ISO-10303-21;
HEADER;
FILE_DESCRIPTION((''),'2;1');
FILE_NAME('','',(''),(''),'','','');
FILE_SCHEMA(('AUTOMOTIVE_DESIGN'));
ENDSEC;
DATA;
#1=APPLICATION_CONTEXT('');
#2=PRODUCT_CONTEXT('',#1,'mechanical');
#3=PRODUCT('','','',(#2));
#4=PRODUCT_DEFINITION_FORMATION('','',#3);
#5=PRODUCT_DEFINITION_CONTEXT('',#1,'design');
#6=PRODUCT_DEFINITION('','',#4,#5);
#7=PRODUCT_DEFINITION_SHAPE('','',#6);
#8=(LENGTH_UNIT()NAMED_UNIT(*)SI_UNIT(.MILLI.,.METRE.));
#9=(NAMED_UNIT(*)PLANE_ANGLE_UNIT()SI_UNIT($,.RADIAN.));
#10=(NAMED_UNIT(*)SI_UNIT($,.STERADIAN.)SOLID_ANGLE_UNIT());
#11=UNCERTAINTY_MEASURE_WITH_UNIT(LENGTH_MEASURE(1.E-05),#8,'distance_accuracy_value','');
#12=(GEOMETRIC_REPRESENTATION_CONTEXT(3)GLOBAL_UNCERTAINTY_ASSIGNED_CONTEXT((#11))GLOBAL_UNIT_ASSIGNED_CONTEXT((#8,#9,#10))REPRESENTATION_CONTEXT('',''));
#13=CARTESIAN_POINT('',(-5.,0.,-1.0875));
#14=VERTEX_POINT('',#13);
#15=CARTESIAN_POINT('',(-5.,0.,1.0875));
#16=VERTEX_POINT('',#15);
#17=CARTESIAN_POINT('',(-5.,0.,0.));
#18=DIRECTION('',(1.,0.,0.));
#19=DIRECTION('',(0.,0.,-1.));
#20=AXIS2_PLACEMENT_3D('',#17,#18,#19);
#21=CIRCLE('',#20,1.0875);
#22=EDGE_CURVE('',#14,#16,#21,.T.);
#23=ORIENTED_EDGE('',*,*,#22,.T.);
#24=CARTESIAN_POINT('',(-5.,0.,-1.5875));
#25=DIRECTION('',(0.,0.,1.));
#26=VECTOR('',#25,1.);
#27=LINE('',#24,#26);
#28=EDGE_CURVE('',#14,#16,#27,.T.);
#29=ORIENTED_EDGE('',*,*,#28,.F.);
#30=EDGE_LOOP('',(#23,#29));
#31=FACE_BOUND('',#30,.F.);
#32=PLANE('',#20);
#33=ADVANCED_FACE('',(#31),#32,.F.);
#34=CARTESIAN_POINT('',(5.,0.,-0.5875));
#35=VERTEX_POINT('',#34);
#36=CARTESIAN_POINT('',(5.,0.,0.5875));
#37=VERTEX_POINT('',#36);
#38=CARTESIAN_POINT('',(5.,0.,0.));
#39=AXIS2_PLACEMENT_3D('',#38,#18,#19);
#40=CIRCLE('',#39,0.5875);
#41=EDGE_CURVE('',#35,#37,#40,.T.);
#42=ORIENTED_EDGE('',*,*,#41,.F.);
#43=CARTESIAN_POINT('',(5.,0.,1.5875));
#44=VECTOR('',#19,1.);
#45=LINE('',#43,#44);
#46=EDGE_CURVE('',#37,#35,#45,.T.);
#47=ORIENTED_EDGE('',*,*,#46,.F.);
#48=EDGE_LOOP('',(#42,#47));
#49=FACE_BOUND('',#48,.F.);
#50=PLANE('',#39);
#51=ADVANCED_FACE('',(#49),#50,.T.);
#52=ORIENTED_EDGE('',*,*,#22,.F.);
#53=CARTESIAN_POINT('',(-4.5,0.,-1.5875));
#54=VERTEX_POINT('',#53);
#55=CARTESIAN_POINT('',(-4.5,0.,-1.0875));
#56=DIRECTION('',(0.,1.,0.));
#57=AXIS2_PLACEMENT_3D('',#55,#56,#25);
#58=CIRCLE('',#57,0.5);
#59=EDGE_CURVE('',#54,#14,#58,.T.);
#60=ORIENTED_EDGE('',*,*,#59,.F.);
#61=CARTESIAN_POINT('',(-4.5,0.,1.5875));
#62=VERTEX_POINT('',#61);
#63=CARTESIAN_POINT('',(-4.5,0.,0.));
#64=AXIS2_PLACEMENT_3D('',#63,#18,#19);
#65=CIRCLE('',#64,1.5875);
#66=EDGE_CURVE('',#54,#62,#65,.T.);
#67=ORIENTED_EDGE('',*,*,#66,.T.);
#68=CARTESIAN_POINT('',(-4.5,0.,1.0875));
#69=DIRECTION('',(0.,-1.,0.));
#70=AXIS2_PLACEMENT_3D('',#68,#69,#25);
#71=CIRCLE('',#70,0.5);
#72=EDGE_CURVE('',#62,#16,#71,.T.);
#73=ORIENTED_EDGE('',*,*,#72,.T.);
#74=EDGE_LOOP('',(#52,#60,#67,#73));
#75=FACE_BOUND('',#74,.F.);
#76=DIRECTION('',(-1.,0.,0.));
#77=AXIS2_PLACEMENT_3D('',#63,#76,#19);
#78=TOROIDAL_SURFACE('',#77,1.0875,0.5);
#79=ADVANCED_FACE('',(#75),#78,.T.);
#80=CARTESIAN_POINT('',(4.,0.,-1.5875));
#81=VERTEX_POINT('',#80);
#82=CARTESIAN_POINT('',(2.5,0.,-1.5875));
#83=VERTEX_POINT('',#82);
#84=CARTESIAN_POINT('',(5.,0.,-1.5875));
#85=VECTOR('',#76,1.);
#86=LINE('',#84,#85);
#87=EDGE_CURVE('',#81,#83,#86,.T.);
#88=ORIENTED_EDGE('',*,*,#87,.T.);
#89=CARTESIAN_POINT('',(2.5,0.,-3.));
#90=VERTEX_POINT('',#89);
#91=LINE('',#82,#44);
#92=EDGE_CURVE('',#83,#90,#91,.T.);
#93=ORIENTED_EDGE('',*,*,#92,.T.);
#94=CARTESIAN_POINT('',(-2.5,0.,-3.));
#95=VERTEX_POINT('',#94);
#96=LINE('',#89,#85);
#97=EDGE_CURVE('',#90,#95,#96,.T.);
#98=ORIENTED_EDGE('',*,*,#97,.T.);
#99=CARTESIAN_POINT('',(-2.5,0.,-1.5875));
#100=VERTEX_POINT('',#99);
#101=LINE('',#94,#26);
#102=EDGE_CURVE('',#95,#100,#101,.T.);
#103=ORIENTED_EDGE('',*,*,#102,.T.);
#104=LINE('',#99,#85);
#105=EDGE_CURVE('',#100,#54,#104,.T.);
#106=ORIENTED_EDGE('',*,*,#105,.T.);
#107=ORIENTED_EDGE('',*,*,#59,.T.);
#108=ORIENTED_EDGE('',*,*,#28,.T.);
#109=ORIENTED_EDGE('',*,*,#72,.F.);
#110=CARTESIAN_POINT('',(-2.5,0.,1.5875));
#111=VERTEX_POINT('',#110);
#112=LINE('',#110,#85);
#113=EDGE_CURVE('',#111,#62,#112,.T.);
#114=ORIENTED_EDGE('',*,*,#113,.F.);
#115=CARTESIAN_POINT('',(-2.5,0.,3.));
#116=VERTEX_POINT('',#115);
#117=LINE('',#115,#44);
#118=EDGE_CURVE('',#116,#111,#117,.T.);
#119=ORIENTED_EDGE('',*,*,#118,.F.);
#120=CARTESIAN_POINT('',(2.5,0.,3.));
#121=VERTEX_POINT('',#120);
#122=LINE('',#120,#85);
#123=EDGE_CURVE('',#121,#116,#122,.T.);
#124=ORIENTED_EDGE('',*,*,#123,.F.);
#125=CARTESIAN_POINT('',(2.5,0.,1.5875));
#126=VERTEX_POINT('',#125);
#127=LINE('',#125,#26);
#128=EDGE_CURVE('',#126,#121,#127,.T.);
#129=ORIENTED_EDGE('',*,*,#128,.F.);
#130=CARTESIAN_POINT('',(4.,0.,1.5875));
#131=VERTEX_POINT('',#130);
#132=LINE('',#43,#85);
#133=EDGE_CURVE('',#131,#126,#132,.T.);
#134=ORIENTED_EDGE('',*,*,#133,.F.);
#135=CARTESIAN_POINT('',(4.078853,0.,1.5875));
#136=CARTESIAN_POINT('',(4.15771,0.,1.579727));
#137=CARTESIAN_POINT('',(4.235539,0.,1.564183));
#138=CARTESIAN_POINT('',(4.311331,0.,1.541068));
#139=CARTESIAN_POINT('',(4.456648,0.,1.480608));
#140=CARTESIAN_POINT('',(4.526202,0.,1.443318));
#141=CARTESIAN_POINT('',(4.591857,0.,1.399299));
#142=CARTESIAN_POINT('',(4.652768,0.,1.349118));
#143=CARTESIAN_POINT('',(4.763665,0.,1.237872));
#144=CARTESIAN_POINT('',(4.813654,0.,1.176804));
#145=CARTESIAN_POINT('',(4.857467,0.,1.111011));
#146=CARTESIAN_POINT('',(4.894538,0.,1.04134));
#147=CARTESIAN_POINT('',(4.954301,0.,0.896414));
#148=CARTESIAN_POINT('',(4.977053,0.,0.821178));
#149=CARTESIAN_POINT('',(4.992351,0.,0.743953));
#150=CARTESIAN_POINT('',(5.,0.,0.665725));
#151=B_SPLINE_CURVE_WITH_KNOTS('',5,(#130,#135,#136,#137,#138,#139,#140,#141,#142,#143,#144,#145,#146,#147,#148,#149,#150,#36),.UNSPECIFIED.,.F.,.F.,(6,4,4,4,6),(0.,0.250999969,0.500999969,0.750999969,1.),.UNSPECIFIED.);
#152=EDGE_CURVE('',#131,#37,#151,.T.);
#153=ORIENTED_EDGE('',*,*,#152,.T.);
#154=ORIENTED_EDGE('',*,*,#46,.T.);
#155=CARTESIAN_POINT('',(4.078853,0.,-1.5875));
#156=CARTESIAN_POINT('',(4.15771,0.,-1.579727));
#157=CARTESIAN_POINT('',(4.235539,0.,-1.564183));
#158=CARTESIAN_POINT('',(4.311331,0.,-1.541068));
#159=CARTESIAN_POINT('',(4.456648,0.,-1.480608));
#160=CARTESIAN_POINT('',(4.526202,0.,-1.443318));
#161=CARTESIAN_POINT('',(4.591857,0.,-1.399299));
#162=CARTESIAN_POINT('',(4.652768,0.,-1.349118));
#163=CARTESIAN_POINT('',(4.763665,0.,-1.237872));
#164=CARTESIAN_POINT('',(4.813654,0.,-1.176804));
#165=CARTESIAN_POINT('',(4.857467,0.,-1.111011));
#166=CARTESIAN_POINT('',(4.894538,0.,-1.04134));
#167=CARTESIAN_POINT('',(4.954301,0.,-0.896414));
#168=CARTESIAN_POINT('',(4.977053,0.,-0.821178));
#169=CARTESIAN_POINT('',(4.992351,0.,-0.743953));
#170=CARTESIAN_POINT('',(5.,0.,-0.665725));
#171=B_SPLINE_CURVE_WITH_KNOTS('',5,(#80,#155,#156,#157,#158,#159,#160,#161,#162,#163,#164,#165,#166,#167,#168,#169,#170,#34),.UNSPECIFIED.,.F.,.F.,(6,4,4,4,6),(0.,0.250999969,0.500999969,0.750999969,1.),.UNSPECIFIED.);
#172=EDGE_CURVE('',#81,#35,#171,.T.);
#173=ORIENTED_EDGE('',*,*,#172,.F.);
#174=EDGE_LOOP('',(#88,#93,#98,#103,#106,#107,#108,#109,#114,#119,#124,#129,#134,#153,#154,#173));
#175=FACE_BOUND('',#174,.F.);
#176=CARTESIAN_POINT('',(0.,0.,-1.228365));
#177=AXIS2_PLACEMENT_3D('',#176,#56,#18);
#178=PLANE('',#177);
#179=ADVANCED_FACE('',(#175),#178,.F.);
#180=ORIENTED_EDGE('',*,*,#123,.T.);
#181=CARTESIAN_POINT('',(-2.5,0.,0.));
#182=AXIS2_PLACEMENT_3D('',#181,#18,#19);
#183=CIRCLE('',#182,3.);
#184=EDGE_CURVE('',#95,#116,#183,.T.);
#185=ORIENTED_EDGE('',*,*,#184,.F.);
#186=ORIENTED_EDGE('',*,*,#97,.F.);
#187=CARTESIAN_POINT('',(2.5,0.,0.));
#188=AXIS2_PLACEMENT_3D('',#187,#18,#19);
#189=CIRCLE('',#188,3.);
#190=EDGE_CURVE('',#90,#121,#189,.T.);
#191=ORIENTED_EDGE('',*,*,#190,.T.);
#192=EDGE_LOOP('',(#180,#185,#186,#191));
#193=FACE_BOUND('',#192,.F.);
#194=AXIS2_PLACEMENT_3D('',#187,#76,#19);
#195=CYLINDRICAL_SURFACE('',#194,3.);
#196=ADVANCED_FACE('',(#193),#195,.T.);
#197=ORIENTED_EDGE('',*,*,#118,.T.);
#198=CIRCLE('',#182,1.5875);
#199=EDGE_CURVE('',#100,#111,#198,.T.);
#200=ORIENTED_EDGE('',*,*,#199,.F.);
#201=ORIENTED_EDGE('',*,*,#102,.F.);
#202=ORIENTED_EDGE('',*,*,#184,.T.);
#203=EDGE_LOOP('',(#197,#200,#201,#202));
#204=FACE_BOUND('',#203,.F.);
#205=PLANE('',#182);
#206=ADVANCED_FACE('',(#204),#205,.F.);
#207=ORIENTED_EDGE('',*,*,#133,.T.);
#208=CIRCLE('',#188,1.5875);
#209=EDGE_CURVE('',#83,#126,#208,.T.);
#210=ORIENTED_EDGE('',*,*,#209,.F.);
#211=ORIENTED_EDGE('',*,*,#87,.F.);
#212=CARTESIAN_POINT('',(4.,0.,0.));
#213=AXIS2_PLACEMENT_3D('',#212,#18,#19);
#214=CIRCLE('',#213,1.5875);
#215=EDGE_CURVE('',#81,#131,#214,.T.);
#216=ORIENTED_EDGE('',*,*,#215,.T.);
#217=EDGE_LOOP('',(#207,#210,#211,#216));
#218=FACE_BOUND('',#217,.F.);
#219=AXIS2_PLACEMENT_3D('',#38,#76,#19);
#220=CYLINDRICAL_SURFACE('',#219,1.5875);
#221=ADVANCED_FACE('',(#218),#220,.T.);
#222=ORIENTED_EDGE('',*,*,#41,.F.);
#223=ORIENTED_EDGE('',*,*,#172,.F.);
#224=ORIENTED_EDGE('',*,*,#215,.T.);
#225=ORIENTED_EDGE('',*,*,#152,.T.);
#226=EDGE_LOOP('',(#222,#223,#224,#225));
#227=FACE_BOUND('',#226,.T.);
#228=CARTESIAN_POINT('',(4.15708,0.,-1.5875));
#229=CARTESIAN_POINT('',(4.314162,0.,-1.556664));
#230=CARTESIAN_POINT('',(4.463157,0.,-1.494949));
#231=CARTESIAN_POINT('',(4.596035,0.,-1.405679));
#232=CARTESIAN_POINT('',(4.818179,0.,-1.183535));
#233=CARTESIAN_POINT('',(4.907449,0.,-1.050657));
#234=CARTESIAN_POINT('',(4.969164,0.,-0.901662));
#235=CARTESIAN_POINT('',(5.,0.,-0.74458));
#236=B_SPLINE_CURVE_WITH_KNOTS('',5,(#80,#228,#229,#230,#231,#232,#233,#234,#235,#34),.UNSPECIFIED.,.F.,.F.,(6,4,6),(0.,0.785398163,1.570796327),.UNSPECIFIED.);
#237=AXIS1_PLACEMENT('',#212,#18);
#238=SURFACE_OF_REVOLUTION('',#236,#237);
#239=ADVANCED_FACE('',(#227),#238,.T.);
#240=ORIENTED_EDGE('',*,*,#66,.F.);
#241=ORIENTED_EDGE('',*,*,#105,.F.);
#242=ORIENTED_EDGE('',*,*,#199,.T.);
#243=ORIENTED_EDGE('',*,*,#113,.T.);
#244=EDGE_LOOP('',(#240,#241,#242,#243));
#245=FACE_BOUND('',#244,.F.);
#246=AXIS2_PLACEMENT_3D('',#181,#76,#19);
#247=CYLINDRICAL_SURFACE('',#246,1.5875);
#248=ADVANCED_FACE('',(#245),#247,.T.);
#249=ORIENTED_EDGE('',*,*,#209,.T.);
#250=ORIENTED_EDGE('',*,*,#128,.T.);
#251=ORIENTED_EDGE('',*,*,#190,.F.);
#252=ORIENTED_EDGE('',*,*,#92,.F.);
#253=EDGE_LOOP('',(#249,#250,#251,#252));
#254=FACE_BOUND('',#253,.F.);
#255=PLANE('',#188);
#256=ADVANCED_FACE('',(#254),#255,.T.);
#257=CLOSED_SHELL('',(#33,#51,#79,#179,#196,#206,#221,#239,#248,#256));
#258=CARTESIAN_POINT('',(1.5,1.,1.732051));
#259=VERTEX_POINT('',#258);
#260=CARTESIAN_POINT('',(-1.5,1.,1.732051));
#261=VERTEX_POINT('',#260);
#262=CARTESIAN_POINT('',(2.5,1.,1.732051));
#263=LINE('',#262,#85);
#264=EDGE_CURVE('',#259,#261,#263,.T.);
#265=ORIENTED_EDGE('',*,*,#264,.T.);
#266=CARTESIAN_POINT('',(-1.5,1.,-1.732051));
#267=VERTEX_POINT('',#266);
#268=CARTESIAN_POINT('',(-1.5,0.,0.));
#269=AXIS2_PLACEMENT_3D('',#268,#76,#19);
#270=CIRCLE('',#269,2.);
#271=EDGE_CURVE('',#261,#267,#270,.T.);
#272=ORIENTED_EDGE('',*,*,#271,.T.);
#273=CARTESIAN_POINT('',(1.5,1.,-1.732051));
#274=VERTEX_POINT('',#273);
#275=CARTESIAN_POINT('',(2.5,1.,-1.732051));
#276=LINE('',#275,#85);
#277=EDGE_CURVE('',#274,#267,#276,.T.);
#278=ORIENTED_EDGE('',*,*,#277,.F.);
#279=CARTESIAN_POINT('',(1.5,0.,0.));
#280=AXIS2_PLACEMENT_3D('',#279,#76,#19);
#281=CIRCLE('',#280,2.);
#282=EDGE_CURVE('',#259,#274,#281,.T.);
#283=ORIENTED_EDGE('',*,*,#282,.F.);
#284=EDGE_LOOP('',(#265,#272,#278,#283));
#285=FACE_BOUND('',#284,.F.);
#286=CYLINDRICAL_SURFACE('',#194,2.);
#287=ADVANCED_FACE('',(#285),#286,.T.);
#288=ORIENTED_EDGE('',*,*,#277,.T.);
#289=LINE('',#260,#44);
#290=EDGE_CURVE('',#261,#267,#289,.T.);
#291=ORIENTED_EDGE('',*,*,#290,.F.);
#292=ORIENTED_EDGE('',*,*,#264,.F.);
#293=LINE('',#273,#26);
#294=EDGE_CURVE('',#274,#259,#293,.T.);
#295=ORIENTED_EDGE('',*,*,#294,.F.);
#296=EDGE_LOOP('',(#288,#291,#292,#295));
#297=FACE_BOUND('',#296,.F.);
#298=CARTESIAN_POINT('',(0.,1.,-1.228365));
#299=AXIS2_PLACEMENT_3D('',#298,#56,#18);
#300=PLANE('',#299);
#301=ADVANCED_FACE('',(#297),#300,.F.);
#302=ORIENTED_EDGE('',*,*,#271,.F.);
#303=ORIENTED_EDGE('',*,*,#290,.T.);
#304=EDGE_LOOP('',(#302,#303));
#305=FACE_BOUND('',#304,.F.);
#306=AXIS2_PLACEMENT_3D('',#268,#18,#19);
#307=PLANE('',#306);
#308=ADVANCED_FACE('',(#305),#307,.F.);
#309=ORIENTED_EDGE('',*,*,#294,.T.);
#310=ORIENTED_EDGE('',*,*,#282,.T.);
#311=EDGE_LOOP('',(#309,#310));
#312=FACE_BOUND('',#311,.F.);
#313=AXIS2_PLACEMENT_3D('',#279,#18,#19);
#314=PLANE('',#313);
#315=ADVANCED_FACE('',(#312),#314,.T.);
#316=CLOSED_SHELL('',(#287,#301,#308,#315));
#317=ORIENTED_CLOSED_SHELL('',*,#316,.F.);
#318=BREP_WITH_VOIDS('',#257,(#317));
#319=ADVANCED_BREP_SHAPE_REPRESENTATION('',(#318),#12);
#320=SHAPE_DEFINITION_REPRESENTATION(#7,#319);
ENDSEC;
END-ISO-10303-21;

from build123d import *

# Parameters (mm, degrees)
F1_ANGLE_BACK = 90
F1_ANGLE      = 180
F2_T          = 1
F2_T4_ANGLE   = 180.000000001
F2_T6_ANGLE   = 180.000000001
F3_R          = 1
F4_R          = 0.5


# Not quite as in the source:
# - a feature of the source that left no trace in its solid (it failed there, or was rolled back) is left out
# - a shell that OpenCascade refuses in one call is made with other operations: the cavity is built on its own and cut out


with BuildPart() as f1:
    # F0 (on Top) → F1 (revolve)
    with BuildSketch(Plane.XY, mode=Mode.PRIVATE) as f1_sk:
        Polygon((-2.5, 1.5875), (-5, 1.5875), (-5, 0), (5, 0), (5, 1.5875), (2.5, 1.5875), (2.5, 3), (-2.5, 3), align=None)
    revolve(f1_sk.sketch.rotate(Axis((0.2477309544, 0, 0), (1, 0, 0)), -F1_ANGLE_BACK), axis=Axis((0.2477309544, 0, 0), (1, 0, 0)), revolution_arc=F1_ANGLE)

    # F2: shell of thickness 1, made by hand


with BuildPart() as f2_core1:
    # F2_t2: copy of F1
    add(f1.part)

    # the walls: a layer under each face that stays
    f2_faces = [f2_core1.faces().sort_by_distance(p)[0] for p in [
        (-3.75, 1.5875, 0),
        (0, 0, 0),
        (3.75, 1.5875, 0),
        (2.5, 0.5, -2),
        (0, 3, 0),
        (-2.5, 0.5, 2),
    ]]
    thicken(f2_faces, amount=-F2_T, mode=Mode.SUBTRACT)

    # F2_s3 → F2_t4 (revolve, cut)
    with BuildSketch(Plane.XZ):
        Polygon((-2.51, -1.5975), (-2.5, -0.5875), (-1.5, -0.5875), (-1.5, -1.5875), align=None)
    revolve(axis=Axis((-2.5, 0, 0), (1, 0, 0)), revolution_arc=F2_T4_ANGLE, mode=Mode.SUBTRACT)

    # F2_s5 → F2_t6 (revolve, cut)
    with BuildSketch(Plane.XZ):
        Polygon((2.51, -1.5975), (2.5, -0.5875), (1.5, -0.5875), (1.5, -1.5875), align=None)
    revolve(axis=Axis((2.5, 0, 0), (1, 0, 0)), revolution_arc=F2_T6_ANGLE, mode=Mode.SUBTRACT)


with BuildPart() as f1_1:
    add(f1.part)

    # what is left inside the walls is the cavity
    f2_cavity = [f2_core1.part.solids().sort_by_distance(p)[0] for p in [
        (0.5, 1.99, 0),
    ]]
    add(f2_cavity, mode=Mode.SUBTRACT)

    # F3
    f3_edges = [f1_1.edges().sort_by_distance(p)[0] for p in [
        (5, 1.5875, 0),
    ]]
    fillet(f3_edges, radius=F3_R)

    # F4
    f4_edges = [f1_1.edges().sort_by_distance(p)[0] for p in [
        (-5, 1.5875, 0),
    ]]
    fillet(f4_edges, radius=F4_R)


solid = f1_1.part
